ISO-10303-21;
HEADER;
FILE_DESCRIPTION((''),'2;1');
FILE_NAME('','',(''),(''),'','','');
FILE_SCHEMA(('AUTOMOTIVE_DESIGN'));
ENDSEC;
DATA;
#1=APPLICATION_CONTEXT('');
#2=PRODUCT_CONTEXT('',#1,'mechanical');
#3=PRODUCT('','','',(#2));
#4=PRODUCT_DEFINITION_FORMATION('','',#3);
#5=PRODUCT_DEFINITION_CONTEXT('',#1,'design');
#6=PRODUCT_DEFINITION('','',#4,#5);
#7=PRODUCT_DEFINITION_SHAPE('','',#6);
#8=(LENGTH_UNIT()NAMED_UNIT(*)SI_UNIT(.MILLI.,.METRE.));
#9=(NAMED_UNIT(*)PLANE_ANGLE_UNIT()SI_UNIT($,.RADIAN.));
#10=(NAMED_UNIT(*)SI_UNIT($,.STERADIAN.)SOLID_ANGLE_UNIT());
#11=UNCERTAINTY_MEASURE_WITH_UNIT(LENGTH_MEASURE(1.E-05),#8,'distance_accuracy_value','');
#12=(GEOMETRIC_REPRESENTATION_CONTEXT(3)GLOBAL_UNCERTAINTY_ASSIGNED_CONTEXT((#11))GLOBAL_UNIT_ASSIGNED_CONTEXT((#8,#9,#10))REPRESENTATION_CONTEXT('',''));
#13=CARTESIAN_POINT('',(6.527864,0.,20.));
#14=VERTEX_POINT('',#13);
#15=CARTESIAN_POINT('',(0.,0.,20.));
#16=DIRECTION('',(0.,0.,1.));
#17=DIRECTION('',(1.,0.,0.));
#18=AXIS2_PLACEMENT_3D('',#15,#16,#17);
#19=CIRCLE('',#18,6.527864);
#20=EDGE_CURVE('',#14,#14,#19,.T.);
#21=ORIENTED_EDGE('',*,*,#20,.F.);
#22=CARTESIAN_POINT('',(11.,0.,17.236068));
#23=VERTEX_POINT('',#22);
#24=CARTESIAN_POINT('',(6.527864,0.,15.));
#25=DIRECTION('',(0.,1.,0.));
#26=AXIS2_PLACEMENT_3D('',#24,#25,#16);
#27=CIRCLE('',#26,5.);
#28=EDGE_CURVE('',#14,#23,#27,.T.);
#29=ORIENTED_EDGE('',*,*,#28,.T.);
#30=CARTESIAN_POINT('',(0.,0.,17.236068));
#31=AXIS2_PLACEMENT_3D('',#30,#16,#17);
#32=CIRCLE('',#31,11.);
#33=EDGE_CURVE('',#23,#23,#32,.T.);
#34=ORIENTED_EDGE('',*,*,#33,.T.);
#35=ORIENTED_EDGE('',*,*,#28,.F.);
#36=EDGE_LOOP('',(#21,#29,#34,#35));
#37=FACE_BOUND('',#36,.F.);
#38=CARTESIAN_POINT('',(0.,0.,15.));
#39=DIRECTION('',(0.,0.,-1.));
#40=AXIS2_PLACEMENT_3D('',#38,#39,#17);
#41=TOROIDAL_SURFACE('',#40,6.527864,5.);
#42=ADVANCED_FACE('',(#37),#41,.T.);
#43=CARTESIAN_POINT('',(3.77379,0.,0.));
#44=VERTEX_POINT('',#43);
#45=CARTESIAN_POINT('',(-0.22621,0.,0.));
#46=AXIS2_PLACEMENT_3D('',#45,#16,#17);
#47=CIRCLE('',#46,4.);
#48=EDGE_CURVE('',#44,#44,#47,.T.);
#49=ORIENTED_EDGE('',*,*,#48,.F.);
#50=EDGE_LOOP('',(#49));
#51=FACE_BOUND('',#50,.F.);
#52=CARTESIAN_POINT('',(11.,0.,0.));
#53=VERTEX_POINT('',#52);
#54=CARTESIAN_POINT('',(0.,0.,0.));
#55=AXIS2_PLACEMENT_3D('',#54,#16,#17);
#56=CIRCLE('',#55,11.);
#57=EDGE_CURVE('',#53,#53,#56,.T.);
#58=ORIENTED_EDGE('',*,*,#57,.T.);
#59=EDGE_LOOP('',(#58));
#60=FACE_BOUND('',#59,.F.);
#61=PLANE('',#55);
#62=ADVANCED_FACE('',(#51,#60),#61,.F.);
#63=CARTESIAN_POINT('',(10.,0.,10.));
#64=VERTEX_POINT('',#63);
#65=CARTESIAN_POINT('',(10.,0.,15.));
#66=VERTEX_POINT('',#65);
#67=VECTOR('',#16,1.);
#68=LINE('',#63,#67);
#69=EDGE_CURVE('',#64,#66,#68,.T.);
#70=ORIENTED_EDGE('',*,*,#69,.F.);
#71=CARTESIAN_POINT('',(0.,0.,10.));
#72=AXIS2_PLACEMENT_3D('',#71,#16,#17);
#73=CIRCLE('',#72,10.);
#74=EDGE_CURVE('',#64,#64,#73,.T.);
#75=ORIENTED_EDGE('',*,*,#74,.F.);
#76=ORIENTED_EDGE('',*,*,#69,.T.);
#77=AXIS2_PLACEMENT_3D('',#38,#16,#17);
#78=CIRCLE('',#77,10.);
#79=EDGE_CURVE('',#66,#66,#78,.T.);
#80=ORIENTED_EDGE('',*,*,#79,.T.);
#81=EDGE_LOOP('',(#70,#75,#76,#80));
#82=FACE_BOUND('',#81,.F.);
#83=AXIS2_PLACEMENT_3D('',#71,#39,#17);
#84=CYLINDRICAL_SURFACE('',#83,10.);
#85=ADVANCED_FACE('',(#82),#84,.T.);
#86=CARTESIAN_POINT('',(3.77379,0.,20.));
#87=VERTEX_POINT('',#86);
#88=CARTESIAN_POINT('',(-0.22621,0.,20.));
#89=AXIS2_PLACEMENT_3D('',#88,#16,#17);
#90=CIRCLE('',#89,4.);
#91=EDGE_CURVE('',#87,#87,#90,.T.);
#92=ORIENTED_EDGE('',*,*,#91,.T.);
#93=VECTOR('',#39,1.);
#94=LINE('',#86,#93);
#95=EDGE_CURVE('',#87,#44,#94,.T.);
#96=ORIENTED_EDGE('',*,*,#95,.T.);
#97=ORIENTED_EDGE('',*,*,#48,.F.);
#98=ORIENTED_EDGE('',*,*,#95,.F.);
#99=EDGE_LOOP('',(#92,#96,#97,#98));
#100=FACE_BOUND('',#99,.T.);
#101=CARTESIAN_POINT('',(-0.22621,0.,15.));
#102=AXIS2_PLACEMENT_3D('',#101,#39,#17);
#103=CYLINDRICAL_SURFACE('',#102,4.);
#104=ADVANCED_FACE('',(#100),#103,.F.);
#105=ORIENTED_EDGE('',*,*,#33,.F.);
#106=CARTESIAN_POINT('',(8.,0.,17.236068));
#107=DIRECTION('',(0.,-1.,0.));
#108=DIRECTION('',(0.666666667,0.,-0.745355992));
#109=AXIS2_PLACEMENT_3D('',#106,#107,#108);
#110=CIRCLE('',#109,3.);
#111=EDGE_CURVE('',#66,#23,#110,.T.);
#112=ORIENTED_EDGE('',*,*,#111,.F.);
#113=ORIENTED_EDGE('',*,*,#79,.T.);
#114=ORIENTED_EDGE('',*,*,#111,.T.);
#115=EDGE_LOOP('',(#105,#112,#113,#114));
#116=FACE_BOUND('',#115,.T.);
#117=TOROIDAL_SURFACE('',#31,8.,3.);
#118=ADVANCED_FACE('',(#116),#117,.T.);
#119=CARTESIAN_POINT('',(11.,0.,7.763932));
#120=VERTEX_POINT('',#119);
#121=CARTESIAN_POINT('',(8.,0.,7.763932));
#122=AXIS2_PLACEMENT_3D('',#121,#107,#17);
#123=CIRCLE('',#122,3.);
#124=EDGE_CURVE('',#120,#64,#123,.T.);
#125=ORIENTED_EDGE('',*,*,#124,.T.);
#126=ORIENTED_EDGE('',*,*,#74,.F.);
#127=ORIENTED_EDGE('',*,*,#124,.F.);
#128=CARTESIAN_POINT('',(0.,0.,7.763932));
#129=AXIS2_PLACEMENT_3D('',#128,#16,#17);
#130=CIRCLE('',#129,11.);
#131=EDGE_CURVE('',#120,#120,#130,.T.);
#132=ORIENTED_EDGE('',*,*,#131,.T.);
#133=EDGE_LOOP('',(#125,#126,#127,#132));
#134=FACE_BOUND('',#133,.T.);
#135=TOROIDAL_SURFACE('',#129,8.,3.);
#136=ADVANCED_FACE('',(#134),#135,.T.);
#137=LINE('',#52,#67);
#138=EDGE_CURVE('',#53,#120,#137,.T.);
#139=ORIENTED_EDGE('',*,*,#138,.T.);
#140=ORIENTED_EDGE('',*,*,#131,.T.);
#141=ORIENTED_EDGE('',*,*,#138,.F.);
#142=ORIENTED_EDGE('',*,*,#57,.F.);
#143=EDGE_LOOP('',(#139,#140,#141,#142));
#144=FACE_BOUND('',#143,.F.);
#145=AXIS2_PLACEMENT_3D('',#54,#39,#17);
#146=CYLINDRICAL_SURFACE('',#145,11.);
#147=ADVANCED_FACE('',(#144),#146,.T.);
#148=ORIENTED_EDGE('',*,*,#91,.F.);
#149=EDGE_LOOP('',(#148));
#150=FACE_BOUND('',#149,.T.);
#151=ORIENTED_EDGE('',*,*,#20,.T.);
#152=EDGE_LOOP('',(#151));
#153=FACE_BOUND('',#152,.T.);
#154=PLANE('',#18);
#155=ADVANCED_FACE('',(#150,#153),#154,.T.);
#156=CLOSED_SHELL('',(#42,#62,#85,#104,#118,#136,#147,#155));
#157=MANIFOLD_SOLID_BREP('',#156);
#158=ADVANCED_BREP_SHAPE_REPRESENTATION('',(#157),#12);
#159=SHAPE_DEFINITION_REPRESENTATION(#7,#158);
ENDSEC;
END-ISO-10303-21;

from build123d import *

# Parameters (mm, degrees)
F0_R     = 11
F0_R_2   = 4
F1_DEPTH = 10
F2_R     = 10
F2_R_2   = 4
F3_DEPTH = 5
F4_R     = 11
F4_R_2   = 10
F4_R_3   = 4
F5_DEPTH = 5


# Not quite as in the source:
# - a fillet or chamfer that OpenCascade refuses, or shapes differently, is made with other operations: its cross-section is extruded or revolved along the edge and cut away or added


with BuildPart() as f1:
    # F0 (on Top) → F1 (new body)
    with BuildSketch(Plane.XY):
        Circle(F0_R)
        with Locations((-0.2262097114, 0)):
            Circle(F0_R_2, mode=Mode.SUBTRACT)
    extrude(amount=F1_DEPTH)

    # F2 (on face) → F3 (join)
    with BuildSketch(Plane.XY.offset(10)):
        Circle(F2_R)
        with Locations((-0.2262097114, 0)):
            Circle(F2_R_2, mode=Mode.SUBTRACT)
    extrude(amount=F3_DEPTH)

    # F4 (on face) → F5 (join)
    with BuildSketch(Plane.XY.offset(15)):
        Circle(F4_R)
        Circle(F4_R_2, mode=Mode.SUBTRACT)
        Circle(F4_R_2)
        with Locations((-0.2262097114, 0)):
            Circle(F4_R_3, mode=Mode.SUBTRACT)
    extrude(amount=F5_DEPTH)

    # F6: fillet of radius 3 on 2 edges, made by hand

    # F6_s1 → F6_t2 (revolve, cut)
    with BuildSketch(Plane.XZ):
        with BuildLine():
            ThreePointArc((10, 15), (10.7386127875, 16.0113231061), (11, 17.2360679775))
            Line((11, 17.2360679775), (11, 15))
            Line((11, 15), (10, 15))
        make_face()
    revolve(axis=Axis((0, 0, 15), (0, 0, 1)), mode=Mode.SUBTRACT)

    # F6_s3 → F6_t4 (revolve, cut)
    with BuildSketch(Plane.XZ):
        with BuildLine():
            ThreePointArc((11, 7.7639320225), (10.7386127875, 8.9886768939), (10, 10))
            Line((10, 10), (11, 10))
            Line((11, 10), (11, 7.7639320225))
        make_face()
    revolve(axis=Axis((0, 0, 10), (0, 0, 1)), mode=Mode.SUBTRACT)

    # F7: fillet of radius 5 on 1 edges, made by hand

    # F7_s1 → F7_t2 (revolve, cut)
    with BuildSketch(Plane.XZ):
        with BuildLine():
            ThreePointArc((6.527864045, 20), (9.1565196056, 19.2532540418), (11, 17.2360679775))
            Line((11, 17.2360679775), (11, 20))
            Line((11, 20), (6.527864045, 20))
        make_face()
    revolve(axis=Axis((0, 0, 20), (0, 0, 1)), mode=Mode.SUBTRACT)


solid = f1.part
